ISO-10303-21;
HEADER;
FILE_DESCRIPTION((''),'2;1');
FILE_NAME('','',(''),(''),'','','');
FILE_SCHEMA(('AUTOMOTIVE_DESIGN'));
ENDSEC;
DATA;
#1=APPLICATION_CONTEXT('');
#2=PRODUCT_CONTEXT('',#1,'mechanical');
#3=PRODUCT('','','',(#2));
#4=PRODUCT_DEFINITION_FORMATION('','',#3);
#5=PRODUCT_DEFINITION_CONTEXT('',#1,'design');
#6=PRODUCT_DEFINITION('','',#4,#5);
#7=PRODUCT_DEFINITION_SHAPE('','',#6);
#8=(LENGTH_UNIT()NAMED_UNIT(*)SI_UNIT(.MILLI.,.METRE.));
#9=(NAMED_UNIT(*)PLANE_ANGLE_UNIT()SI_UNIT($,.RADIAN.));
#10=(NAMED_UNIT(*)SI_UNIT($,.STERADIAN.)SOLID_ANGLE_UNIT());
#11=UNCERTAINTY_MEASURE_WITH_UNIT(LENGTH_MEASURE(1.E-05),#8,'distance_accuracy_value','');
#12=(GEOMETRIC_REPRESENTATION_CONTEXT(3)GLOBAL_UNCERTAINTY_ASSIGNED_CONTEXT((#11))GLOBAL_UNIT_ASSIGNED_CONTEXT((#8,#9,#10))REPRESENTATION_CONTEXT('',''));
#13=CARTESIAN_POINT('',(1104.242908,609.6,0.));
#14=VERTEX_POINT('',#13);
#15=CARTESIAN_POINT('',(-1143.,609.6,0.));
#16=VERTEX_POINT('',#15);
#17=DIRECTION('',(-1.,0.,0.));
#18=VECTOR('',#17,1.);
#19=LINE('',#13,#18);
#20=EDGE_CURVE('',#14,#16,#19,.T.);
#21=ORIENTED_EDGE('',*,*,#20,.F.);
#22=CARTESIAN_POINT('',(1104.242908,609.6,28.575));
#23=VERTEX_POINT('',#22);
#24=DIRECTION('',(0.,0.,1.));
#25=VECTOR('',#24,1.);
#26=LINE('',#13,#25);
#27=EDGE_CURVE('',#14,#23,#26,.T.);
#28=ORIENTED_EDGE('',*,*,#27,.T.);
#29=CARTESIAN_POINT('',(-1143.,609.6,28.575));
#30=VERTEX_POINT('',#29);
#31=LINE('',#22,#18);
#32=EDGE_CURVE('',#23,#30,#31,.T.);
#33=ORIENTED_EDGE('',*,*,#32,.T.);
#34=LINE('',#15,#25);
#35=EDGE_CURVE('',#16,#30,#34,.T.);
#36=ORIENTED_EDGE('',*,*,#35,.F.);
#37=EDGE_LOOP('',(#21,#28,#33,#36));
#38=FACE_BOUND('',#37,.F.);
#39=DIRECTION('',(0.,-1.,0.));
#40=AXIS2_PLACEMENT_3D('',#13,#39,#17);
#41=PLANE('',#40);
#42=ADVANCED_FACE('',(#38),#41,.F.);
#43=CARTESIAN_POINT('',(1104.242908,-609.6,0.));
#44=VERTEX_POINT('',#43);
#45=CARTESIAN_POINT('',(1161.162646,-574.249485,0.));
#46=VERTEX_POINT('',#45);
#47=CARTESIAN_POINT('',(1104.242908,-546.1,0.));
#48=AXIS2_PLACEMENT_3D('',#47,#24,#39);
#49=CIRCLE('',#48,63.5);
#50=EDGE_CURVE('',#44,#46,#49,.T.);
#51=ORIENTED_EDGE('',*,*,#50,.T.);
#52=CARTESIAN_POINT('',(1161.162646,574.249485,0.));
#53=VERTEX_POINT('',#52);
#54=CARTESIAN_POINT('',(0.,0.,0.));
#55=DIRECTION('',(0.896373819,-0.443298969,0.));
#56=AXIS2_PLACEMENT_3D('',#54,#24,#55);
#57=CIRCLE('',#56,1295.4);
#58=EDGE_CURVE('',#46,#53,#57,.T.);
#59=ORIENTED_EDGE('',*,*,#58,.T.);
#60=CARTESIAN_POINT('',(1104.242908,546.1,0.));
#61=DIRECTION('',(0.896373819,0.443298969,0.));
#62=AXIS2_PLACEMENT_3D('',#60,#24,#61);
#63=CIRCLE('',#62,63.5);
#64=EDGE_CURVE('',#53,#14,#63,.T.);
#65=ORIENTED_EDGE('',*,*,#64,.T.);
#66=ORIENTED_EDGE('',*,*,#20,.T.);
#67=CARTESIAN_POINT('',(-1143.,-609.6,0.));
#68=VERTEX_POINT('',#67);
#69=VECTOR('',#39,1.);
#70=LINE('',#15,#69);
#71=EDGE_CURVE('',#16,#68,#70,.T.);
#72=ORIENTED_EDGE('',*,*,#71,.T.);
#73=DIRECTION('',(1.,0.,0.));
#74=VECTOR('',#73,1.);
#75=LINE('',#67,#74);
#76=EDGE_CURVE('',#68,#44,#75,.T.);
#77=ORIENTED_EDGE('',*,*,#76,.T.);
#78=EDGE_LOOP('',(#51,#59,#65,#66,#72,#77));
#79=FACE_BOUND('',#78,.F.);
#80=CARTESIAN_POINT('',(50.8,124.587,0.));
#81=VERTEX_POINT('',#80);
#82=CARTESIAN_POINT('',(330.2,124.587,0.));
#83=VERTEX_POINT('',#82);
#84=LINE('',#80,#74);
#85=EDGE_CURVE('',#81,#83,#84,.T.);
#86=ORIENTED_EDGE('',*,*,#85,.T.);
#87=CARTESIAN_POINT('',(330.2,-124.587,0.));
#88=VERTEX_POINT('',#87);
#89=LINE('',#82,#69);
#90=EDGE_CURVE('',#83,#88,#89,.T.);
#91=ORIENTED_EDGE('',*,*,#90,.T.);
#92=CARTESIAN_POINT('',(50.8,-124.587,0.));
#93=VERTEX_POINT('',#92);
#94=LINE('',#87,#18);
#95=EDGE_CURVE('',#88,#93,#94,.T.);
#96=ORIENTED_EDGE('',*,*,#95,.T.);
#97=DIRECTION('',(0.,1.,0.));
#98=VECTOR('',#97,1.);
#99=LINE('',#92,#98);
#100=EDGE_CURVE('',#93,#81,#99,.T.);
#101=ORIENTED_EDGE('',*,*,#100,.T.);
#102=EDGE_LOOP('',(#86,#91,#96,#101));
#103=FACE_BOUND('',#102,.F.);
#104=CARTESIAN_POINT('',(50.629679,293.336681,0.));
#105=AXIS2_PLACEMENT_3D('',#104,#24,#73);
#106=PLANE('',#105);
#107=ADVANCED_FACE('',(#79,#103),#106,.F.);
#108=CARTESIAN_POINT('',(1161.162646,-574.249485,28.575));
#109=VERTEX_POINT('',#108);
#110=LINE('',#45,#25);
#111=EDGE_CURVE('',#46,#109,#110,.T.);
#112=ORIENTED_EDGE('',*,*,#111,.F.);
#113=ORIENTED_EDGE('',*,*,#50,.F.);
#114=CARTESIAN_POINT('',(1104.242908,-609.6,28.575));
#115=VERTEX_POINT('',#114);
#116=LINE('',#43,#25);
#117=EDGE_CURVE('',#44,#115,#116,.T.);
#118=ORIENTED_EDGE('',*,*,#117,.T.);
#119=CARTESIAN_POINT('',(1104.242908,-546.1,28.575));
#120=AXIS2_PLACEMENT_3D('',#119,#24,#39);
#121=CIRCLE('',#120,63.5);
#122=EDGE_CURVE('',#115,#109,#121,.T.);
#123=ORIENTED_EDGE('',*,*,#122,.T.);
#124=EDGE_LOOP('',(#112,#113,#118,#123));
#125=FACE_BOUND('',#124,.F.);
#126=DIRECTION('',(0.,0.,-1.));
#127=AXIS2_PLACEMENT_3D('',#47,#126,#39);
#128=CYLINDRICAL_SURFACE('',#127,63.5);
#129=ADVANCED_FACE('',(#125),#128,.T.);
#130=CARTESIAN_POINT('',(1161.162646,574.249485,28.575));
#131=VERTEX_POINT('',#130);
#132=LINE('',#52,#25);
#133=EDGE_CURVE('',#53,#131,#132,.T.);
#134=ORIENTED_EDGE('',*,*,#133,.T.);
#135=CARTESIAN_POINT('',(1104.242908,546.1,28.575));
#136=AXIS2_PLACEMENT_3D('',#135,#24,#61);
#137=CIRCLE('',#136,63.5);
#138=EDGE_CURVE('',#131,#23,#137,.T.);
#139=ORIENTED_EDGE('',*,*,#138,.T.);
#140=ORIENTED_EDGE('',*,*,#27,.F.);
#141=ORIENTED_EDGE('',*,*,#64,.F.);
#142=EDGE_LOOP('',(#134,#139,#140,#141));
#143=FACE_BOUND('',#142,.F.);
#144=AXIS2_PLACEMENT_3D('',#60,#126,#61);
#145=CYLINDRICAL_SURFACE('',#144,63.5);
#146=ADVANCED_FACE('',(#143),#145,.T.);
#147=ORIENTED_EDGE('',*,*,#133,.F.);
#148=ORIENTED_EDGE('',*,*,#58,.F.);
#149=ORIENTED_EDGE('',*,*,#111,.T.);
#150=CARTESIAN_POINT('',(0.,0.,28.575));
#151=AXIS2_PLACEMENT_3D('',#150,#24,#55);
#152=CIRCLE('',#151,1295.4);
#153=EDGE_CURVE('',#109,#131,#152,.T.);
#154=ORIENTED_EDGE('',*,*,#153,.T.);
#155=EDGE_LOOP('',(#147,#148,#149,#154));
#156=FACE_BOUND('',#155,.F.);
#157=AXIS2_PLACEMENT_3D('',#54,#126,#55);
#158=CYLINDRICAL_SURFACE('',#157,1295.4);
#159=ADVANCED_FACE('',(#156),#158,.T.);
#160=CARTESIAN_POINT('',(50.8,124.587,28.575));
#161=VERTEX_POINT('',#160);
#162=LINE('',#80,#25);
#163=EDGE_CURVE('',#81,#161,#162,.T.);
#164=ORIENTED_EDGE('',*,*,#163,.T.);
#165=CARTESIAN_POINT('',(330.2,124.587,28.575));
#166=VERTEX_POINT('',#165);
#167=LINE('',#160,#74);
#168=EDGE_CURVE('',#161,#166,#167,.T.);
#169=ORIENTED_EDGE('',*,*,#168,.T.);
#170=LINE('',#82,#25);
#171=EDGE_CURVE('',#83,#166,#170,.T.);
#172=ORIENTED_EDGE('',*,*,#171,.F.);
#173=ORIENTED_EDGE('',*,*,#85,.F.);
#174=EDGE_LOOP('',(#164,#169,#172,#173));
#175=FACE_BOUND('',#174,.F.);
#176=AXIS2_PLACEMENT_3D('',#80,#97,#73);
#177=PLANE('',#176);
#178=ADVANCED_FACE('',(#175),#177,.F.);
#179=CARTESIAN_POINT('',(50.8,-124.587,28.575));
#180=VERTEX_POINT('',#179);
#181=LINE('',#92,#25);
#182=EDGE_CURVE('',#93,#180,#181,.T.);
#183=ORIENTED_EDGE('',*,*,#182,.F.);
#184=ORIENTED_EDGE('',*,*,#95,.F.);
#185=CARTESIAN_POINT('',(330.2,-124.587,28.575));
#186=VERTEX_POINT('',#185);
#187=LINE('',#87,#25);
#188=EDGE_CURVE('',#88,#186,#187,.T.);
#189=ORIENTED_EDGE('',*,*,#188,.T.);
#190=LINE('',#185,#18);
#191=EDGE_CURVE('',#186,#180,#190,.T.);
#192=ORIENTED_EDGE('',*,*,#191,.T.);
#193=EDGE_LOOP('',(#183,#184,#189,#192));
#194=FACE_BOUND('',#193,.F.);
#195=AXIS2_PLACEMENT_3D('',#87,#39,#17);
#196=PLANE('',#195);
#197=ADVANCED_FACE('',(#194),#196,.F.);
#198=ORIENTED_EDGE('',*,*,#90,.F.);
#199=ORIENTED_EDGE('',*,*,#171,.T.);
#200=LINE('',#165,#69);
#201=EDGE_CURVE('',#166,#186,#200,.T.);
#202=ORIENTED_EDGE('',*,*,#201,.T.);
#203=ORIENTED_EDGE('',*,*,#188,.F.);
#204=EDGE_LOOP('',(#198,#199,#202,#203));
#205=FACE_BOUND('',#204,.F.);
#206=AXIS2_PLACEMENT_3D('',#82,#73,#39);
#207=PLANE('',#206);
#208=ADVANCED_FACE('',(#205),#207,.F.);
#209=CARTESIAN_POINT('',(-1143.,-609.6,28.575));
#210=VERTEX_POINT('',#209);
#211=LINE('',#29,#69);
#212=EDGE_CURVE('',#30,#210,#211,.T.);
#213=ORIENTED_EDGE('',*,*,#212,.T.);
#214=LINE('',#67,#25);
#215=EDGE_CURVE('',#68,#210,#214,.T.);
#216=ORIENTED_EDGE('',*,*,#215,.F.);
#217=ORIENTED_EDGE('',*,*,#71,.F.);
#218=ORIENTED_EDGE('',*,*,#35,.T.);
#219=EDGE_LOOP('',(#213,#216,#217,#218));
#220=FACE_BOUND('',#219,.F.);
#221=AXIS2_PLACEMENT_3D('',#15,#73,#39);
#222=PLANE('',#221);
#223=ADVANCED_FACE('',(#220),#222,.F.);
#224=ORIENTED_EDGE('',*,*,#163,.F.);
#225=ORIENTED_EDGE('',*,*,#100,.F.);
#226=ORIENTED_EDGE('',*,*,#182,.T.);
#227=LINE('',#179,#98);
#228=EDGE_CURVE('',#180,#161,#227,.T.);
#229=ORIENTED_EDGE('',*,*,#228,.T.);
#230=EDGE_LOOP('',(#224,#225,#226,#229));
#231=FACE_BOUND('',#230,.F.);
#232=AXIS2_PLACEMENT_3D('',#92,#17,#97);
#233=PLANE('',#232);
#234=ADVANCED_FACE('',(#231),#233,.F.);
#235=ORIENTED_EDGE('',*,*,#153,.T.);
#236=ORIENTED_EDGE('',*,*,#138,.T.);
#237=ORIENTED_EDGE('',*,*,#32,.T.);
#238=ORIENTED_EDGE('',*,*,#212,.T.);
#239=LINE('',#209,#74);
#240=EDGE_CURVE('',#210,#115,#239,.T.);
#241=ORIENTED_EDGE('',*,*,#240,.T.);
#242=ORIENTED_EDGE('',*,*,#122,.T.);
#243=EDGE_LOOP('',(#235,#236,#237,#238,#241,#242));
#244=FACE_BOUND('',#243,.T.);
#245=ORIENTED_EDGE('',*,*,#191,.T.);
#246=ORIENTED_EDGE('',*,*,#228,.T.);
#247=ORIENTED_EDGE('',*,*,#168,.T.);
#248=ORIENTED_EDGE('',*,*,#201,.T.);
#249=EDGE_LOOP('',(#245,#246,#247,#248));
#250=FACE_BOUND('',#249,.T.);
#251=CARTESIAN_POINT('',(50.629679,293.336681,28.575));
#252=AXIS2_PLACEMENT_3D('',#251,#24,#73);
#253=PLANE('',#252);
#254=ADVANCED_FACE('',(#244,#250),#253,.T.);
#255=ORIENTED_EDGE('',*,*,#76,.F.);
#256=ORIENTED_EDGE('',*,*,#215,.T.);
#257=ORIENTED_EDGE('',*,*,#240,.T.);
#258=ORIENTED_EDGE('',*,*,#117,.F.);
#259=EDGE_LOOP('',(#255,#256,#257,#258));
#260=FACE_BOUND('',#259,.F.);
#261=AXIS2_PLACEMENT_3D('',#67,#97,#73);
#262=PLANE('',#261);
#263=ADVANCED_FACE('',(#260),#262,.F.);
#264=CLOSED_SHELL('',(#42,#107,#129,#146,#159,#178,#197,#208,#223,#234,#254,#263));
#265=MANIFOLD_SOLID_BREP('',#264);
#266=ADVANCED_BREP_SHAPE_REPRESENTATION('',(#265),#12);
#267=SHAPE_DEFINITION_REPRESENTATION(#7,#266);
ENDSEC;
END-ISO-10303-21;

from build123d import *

# Parameters (mm, degrees)
F1_DEPTH = 28.575


# Not quite as in the source:
# - a feature names something its author has since deleted; it is built from what else it names


with BuildPart() as f1:
    # F0 (on Top) → F1 (new body)
    with BuildSketch(Plane.XY):
        with BuildLine():
            Line((1104.2429080596, 609.6), (-1143, 609.6))
            Line((-1143, 609.6), (-1143, 0))
            Line((-1143, 0), (50.8, 0))
            Line((50.8, 0), (50.8, 124.587))
            Line((50.8, 124.587), (330.2, 124.587))
            Line((330.2, 124.587), (330.2, 0))
            Line((330.2, 0), (1143, 0))
            Line((1143, 0), (1295.4, 0))
            ThreePointArc((1295.4, 0), (1261.3943180258, 294.8652818701), (1161.1626455885, 574.2494845361))
            ThreePointArc((1161.1626455885, 574.2494845361), (1137.7448313773, 600.0432213908), (1104.2429080596, 609.6))
        make_face()
        with BuildLine():
            Line((50.8, 0), (-1143, 0))
            Line((-1143, 0), (-1143, -609.6))
            Line((-1143, -609.6), (1104.2429080596, -609.6))
            ThreePointArc((1104.2429080596, -609.6), (1137.7448313773, -600.0432213908), (1161.1626455885, -574.2494845361))
            ThreePointArc((1161.1626455885, -574.2494845361), (1261.3943180258, -294.8652818701), (1295.4, 0))
            Line((1295.4, 0), (1143, 0))
            Line((1143, 0), (330.2, 0))
            Line((330.2, 0), (330.2, -124.587))
            Line((330.2, -124.587), (50.8, -124.587))
            Line((50.8, -124.587), (50.8, 0))
        make_face()
    extrude(amount=F1_DEPTH)


solid = f1.part
